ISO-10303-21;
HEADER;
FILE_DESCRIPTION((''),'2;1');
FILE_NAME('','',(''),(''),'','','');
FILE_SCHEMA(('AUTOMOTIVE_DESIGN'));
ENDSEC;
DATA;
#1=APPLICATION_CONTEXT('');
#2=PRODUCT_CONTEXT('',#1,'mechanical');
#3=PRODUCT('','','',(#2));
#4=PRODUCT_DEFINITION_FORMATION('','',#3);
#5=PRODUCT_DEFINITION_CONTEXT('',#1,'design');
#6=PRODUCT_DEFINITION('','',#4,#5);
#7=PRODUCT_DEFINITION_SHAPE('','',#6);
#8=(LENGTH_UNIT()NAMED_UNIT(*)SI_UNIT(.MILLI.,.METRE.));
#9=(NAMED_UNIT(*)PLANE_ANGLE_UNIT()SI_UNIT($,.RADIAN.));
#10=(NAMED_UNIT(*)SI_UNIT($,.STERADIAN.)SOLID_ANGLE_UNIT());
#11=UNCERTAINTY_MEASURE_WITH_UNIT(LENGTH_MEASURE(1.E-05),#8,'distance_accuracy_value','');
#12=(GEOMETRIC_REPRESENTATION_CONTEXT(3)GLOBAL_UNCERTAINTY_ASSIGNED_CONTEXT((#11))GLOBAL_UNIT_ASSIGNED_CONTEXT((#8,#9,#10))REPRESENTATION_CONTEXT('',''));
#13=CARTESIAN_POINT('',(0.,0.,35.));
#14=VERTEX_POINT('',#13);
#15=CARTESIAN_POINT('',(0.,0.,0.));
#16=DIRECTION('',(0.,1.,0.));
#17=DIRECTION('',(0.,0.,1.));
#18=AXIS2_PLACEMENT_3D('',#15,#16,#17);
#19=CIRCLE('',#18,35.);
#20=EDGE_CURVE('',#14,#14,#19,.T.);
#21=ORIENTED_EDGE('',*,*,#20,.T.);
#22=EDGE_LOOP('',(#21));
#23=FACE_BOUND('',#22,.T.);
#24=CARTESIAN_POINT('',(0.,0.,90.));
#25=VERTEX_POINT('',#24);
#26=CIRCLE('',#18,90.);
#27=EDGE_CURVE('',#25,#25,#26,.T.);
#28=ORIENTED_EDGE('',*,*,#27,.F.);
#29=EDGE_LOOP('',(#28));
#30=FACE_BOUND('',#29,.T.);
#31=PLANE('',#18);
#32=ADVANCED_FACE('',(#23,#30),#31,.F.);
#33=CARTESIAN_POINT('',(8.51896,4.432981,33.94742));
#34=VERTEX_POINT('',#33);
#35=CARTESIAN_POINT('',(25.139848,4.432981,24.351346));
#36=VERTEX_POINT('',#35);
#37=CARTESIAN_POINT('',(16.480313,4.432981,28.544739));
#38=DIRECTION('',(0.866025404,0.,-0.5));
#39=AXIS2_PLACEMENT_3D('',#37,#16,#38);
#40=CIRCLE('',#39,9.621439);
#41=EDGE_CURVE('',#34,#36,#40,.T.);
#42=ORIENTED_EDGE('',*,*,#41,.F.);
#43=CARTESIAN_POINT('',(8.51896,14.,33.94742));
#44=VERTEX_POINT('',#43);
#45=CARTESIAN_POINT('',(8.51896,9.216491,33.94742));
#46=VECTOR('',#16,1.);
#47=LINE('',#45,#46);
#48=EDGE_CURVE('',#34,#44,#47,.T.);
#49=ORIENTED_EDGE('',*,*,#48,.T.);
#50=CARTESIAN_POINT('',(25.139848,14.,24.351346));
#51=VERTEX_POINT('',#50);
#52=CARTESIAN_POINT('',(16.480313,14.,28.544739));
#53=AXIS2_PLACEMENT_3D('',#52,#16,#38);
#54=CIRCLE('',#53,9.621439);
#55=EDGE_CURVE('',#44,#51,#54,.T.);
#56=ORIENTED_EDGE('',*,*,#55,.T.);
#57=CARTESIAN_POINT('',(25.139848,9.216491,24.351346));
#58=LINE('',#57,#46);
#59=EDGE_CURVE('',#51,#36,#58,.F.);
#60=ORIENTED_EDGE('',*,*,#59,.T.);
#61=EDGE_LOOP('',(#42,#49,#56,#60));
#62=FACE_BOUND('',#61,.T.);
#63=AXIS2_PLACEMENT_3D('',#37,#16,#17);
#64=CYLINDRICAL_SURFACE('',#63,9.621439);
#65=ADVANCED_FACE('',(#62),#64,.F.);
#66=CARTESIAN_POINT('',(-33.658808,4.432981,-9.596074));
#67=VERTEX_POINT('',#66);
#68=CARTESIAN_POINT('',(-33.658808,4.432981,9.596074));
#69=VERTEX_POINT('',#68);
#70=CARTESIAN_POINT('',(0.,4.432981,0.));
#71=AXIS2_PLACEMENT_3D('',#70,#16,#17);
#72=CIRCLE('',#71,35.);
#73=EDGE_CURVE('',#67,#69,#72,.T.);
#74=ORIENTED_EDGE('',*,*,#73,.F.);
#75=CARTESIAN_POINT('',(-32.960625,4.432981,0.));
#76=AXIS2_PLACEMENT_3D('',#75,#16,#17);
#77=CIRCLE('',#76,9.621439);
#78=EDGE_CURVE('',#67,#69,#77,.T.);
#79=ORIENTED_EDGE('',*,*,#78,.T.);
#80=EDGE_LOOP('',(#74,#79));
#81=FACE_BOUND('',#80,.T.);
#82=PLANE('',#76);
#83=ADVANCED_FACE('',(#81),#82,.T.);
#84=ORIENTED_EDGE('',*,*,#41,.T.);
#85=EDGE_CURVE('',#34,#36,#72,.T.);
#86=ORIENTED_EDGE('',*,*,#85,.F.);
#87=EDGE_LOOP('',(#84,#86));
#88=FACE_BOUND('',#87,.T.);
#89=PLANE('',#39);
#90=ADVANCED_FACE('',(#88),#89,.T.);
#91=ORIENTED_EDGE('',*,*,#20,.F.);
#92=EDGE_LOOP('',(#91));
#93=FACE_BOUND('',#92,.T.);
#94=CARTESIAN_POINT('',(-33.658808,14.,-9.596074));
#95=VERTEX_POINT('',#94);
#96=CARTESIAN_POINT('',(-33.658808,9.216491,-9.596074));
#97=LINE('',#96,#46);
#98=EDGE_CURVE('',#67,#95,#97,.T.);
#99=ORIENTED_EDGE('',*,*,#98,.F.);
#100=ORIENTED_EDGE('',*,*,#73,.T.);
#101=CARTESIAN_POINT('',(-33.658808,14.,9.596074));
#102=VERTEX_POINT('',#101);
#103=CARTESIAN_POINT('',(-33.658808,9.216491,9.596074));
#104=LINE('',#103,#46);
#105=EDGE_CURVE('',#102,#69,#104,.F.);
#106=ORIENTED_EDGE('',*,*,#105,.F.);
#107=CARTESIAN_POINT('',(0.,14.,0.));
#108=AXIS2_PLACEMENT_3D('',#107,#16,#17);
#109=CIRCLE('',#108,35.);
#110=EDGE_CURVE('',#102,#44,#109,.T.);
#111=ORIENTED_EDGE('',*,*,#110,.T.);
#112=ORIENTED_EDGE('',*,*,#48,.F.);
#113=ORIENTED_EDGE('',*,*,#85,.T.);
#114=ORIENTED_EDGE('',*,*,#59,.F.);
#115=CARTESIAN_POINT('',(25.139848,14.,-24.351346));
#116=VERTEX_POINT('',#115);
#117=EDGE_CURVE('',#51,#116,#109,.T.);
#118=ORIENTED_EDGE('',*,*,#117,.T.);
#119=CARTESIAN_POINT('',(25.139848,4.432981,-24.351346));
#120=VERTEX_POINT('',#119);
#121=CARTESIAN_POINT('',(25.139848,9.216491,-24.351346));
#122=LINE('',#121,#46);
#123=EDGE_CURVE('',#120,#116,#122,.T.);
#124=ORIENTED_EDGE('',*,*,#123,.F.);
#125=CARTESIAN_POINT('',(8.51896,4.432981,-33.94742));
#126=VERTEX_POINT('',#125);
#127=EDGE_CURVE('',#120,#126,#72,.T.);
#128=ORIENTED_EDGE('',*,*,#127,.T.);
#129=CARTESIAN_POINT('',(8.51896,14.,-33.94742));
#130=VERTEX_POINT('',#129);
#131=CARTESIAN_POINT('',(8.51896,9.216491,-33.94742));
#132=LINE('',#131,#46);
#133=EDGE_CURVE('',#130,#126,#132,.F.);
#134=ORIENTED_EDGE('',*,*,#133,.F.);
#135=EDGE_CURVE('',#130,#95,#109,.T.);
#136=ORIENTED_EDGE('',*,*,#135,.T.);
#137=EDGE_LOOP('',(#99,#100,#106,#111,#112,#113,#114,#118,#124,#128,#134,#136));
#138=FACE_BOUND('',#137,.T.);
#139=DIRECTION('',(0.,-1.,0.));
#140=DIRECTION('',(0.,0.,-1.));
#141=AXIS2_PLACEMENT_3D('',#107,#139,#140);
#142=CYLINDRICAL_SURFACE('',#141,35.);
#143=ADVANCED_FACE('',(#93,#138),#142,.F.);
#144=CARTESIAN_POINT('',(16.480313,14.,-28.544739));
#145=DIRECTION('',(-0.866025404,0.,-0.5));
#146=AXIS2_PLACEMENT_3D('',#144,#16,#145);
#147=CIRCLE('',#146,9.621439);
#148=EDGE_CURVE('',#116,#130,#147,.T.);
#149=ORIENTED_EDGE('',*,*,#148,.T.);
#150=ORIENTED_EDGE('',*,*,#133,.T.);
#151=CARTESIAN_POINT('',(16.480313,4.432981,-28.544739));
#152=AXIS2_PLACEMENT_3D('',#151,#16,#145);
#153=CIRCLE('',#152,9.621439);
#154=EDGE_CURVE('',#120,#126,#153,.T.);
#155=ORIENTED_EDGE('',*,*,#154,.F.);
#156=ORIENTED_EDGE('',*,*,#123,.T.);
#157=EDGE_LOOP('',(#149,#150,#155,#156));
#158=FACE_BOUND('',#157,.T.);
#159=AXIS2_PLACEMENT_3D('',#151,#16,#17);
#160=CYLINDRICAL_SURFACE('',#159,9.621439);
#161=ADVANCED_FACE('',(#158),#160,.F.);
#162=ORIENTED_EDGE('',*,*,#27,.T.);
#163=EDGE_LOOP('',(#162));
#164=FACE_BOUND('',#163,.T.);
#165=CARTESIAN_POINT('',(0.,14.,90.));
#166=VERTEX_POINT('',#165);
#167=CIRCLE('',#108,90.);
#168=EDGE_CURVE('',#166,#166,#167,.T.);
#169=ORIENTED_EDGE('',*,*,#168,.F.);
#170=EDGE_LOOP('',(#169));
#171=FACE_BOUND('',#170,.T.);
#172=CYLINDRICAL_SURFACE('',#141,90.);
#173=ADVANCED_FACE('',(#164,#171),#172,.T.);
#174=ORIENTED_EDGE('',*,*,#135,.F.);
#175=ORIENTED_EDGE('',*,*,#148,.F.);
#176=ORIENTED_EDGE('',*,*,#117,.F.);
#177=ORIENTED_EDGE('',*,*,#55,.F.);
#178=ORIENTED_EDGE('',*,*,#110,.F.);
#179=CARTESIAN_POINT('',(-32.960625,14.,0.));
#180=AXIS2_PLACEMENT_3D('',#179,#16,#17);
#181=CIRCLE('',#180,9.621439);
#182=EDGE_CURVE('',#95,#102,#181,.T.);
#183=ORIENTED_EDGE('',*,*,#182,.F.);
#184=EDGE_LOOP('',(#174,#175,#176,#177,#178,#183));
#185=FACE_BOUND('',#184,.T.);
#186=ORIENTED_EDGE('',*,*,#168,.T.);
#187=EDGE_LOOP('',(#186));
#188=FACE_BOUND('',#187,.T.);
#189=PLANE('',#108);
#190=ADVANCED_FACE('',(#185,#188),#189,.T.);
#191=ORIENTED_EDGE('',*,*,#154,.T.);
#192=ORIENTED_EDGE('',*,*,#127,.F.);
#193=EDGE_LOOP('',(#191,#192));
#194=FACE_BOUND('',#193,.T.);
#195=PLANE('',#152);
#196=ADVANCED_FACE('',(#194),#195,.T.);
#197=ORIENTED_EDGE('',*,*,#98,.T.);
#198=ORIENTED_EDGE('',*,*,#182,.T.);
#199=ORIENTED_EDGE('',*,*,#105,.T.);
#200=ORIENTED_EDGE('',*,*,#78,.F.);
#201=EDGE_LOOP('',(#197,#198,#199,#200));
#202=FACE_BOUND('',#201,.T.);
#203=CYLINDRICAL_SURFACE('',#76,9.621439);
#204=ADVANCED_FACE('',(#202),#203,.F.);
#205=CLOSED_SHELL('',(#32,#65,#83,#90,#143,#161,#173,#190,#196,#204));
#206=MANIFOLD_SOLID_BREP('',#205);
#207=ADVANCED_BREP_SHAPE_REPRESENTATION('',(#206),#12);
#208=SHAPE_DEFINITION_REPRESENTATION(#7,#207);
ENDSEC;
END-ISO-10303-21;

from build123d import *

# Parameters (mm, degrees)
SKETCH1_R           = 90
BOSS_EXTRUDE1_DEPTH = 14
SKETCH2_R           = 35
CUT_EXTRUDE1_DEPTH  = 129.04686642
SKETCH3_R           = 9.621439394
CUT_EXTRUDE2_DEPTH  = 9.567018908
CIRPATTERN1_COUNT   = 3


with BuildPart() as part:
    # Sketch1 → Boss-Extrude1 (new body)
    with BuildSketch(Plane(origin=(0, 0, 0), x_dir=(1, 0, 0), z_dir=(0, 1, 0))):
        Circle(SKETCH1_R)
    extrude(amount=BOSS_EXTRUDE1_DEPTH)

    # Sketch2 → Cut-Extrude1 (cut, through all)
    with BuildSketch(Plane(origin=(0, 0, 0), x_dir=(1, 0, 0), z_dir=(0, 1, 0))):
        Circle(SKETCH2_R)
    extrude(amount=CUT_EXTRUDE1_DEPTH, mode=Mode.SUBTRACT)

    # Sketch3 → Cut-Extrude2 (cut)
    with BuildSketch(Plane(origin=(0, 14, 0), x_dir=(1, 0, 0), z_dir=(0, 1, 0))):
        with Locations((-32.960625028, 0)):
            Circle(SKETCH3_R)
    cut_extrude2 = extrude(amount=-CUT_EXTRUDE2_DEPTH, mode=Mode.SUBTRACT)

    # CirPattern1: Cut-Extrude2 ×3 about axis
    cirpattern1_axis = Axis((0, 0, 0), (0, 1, 0))
    for i in range(1, CIRPATTERN1_COUNT):
        add(cut_extrude2.rotate(cirpattern1_axis, i * 360 / CIRPATTERN1_COUNT), mode=Mode.SUBTRACT)


solid = part.part
